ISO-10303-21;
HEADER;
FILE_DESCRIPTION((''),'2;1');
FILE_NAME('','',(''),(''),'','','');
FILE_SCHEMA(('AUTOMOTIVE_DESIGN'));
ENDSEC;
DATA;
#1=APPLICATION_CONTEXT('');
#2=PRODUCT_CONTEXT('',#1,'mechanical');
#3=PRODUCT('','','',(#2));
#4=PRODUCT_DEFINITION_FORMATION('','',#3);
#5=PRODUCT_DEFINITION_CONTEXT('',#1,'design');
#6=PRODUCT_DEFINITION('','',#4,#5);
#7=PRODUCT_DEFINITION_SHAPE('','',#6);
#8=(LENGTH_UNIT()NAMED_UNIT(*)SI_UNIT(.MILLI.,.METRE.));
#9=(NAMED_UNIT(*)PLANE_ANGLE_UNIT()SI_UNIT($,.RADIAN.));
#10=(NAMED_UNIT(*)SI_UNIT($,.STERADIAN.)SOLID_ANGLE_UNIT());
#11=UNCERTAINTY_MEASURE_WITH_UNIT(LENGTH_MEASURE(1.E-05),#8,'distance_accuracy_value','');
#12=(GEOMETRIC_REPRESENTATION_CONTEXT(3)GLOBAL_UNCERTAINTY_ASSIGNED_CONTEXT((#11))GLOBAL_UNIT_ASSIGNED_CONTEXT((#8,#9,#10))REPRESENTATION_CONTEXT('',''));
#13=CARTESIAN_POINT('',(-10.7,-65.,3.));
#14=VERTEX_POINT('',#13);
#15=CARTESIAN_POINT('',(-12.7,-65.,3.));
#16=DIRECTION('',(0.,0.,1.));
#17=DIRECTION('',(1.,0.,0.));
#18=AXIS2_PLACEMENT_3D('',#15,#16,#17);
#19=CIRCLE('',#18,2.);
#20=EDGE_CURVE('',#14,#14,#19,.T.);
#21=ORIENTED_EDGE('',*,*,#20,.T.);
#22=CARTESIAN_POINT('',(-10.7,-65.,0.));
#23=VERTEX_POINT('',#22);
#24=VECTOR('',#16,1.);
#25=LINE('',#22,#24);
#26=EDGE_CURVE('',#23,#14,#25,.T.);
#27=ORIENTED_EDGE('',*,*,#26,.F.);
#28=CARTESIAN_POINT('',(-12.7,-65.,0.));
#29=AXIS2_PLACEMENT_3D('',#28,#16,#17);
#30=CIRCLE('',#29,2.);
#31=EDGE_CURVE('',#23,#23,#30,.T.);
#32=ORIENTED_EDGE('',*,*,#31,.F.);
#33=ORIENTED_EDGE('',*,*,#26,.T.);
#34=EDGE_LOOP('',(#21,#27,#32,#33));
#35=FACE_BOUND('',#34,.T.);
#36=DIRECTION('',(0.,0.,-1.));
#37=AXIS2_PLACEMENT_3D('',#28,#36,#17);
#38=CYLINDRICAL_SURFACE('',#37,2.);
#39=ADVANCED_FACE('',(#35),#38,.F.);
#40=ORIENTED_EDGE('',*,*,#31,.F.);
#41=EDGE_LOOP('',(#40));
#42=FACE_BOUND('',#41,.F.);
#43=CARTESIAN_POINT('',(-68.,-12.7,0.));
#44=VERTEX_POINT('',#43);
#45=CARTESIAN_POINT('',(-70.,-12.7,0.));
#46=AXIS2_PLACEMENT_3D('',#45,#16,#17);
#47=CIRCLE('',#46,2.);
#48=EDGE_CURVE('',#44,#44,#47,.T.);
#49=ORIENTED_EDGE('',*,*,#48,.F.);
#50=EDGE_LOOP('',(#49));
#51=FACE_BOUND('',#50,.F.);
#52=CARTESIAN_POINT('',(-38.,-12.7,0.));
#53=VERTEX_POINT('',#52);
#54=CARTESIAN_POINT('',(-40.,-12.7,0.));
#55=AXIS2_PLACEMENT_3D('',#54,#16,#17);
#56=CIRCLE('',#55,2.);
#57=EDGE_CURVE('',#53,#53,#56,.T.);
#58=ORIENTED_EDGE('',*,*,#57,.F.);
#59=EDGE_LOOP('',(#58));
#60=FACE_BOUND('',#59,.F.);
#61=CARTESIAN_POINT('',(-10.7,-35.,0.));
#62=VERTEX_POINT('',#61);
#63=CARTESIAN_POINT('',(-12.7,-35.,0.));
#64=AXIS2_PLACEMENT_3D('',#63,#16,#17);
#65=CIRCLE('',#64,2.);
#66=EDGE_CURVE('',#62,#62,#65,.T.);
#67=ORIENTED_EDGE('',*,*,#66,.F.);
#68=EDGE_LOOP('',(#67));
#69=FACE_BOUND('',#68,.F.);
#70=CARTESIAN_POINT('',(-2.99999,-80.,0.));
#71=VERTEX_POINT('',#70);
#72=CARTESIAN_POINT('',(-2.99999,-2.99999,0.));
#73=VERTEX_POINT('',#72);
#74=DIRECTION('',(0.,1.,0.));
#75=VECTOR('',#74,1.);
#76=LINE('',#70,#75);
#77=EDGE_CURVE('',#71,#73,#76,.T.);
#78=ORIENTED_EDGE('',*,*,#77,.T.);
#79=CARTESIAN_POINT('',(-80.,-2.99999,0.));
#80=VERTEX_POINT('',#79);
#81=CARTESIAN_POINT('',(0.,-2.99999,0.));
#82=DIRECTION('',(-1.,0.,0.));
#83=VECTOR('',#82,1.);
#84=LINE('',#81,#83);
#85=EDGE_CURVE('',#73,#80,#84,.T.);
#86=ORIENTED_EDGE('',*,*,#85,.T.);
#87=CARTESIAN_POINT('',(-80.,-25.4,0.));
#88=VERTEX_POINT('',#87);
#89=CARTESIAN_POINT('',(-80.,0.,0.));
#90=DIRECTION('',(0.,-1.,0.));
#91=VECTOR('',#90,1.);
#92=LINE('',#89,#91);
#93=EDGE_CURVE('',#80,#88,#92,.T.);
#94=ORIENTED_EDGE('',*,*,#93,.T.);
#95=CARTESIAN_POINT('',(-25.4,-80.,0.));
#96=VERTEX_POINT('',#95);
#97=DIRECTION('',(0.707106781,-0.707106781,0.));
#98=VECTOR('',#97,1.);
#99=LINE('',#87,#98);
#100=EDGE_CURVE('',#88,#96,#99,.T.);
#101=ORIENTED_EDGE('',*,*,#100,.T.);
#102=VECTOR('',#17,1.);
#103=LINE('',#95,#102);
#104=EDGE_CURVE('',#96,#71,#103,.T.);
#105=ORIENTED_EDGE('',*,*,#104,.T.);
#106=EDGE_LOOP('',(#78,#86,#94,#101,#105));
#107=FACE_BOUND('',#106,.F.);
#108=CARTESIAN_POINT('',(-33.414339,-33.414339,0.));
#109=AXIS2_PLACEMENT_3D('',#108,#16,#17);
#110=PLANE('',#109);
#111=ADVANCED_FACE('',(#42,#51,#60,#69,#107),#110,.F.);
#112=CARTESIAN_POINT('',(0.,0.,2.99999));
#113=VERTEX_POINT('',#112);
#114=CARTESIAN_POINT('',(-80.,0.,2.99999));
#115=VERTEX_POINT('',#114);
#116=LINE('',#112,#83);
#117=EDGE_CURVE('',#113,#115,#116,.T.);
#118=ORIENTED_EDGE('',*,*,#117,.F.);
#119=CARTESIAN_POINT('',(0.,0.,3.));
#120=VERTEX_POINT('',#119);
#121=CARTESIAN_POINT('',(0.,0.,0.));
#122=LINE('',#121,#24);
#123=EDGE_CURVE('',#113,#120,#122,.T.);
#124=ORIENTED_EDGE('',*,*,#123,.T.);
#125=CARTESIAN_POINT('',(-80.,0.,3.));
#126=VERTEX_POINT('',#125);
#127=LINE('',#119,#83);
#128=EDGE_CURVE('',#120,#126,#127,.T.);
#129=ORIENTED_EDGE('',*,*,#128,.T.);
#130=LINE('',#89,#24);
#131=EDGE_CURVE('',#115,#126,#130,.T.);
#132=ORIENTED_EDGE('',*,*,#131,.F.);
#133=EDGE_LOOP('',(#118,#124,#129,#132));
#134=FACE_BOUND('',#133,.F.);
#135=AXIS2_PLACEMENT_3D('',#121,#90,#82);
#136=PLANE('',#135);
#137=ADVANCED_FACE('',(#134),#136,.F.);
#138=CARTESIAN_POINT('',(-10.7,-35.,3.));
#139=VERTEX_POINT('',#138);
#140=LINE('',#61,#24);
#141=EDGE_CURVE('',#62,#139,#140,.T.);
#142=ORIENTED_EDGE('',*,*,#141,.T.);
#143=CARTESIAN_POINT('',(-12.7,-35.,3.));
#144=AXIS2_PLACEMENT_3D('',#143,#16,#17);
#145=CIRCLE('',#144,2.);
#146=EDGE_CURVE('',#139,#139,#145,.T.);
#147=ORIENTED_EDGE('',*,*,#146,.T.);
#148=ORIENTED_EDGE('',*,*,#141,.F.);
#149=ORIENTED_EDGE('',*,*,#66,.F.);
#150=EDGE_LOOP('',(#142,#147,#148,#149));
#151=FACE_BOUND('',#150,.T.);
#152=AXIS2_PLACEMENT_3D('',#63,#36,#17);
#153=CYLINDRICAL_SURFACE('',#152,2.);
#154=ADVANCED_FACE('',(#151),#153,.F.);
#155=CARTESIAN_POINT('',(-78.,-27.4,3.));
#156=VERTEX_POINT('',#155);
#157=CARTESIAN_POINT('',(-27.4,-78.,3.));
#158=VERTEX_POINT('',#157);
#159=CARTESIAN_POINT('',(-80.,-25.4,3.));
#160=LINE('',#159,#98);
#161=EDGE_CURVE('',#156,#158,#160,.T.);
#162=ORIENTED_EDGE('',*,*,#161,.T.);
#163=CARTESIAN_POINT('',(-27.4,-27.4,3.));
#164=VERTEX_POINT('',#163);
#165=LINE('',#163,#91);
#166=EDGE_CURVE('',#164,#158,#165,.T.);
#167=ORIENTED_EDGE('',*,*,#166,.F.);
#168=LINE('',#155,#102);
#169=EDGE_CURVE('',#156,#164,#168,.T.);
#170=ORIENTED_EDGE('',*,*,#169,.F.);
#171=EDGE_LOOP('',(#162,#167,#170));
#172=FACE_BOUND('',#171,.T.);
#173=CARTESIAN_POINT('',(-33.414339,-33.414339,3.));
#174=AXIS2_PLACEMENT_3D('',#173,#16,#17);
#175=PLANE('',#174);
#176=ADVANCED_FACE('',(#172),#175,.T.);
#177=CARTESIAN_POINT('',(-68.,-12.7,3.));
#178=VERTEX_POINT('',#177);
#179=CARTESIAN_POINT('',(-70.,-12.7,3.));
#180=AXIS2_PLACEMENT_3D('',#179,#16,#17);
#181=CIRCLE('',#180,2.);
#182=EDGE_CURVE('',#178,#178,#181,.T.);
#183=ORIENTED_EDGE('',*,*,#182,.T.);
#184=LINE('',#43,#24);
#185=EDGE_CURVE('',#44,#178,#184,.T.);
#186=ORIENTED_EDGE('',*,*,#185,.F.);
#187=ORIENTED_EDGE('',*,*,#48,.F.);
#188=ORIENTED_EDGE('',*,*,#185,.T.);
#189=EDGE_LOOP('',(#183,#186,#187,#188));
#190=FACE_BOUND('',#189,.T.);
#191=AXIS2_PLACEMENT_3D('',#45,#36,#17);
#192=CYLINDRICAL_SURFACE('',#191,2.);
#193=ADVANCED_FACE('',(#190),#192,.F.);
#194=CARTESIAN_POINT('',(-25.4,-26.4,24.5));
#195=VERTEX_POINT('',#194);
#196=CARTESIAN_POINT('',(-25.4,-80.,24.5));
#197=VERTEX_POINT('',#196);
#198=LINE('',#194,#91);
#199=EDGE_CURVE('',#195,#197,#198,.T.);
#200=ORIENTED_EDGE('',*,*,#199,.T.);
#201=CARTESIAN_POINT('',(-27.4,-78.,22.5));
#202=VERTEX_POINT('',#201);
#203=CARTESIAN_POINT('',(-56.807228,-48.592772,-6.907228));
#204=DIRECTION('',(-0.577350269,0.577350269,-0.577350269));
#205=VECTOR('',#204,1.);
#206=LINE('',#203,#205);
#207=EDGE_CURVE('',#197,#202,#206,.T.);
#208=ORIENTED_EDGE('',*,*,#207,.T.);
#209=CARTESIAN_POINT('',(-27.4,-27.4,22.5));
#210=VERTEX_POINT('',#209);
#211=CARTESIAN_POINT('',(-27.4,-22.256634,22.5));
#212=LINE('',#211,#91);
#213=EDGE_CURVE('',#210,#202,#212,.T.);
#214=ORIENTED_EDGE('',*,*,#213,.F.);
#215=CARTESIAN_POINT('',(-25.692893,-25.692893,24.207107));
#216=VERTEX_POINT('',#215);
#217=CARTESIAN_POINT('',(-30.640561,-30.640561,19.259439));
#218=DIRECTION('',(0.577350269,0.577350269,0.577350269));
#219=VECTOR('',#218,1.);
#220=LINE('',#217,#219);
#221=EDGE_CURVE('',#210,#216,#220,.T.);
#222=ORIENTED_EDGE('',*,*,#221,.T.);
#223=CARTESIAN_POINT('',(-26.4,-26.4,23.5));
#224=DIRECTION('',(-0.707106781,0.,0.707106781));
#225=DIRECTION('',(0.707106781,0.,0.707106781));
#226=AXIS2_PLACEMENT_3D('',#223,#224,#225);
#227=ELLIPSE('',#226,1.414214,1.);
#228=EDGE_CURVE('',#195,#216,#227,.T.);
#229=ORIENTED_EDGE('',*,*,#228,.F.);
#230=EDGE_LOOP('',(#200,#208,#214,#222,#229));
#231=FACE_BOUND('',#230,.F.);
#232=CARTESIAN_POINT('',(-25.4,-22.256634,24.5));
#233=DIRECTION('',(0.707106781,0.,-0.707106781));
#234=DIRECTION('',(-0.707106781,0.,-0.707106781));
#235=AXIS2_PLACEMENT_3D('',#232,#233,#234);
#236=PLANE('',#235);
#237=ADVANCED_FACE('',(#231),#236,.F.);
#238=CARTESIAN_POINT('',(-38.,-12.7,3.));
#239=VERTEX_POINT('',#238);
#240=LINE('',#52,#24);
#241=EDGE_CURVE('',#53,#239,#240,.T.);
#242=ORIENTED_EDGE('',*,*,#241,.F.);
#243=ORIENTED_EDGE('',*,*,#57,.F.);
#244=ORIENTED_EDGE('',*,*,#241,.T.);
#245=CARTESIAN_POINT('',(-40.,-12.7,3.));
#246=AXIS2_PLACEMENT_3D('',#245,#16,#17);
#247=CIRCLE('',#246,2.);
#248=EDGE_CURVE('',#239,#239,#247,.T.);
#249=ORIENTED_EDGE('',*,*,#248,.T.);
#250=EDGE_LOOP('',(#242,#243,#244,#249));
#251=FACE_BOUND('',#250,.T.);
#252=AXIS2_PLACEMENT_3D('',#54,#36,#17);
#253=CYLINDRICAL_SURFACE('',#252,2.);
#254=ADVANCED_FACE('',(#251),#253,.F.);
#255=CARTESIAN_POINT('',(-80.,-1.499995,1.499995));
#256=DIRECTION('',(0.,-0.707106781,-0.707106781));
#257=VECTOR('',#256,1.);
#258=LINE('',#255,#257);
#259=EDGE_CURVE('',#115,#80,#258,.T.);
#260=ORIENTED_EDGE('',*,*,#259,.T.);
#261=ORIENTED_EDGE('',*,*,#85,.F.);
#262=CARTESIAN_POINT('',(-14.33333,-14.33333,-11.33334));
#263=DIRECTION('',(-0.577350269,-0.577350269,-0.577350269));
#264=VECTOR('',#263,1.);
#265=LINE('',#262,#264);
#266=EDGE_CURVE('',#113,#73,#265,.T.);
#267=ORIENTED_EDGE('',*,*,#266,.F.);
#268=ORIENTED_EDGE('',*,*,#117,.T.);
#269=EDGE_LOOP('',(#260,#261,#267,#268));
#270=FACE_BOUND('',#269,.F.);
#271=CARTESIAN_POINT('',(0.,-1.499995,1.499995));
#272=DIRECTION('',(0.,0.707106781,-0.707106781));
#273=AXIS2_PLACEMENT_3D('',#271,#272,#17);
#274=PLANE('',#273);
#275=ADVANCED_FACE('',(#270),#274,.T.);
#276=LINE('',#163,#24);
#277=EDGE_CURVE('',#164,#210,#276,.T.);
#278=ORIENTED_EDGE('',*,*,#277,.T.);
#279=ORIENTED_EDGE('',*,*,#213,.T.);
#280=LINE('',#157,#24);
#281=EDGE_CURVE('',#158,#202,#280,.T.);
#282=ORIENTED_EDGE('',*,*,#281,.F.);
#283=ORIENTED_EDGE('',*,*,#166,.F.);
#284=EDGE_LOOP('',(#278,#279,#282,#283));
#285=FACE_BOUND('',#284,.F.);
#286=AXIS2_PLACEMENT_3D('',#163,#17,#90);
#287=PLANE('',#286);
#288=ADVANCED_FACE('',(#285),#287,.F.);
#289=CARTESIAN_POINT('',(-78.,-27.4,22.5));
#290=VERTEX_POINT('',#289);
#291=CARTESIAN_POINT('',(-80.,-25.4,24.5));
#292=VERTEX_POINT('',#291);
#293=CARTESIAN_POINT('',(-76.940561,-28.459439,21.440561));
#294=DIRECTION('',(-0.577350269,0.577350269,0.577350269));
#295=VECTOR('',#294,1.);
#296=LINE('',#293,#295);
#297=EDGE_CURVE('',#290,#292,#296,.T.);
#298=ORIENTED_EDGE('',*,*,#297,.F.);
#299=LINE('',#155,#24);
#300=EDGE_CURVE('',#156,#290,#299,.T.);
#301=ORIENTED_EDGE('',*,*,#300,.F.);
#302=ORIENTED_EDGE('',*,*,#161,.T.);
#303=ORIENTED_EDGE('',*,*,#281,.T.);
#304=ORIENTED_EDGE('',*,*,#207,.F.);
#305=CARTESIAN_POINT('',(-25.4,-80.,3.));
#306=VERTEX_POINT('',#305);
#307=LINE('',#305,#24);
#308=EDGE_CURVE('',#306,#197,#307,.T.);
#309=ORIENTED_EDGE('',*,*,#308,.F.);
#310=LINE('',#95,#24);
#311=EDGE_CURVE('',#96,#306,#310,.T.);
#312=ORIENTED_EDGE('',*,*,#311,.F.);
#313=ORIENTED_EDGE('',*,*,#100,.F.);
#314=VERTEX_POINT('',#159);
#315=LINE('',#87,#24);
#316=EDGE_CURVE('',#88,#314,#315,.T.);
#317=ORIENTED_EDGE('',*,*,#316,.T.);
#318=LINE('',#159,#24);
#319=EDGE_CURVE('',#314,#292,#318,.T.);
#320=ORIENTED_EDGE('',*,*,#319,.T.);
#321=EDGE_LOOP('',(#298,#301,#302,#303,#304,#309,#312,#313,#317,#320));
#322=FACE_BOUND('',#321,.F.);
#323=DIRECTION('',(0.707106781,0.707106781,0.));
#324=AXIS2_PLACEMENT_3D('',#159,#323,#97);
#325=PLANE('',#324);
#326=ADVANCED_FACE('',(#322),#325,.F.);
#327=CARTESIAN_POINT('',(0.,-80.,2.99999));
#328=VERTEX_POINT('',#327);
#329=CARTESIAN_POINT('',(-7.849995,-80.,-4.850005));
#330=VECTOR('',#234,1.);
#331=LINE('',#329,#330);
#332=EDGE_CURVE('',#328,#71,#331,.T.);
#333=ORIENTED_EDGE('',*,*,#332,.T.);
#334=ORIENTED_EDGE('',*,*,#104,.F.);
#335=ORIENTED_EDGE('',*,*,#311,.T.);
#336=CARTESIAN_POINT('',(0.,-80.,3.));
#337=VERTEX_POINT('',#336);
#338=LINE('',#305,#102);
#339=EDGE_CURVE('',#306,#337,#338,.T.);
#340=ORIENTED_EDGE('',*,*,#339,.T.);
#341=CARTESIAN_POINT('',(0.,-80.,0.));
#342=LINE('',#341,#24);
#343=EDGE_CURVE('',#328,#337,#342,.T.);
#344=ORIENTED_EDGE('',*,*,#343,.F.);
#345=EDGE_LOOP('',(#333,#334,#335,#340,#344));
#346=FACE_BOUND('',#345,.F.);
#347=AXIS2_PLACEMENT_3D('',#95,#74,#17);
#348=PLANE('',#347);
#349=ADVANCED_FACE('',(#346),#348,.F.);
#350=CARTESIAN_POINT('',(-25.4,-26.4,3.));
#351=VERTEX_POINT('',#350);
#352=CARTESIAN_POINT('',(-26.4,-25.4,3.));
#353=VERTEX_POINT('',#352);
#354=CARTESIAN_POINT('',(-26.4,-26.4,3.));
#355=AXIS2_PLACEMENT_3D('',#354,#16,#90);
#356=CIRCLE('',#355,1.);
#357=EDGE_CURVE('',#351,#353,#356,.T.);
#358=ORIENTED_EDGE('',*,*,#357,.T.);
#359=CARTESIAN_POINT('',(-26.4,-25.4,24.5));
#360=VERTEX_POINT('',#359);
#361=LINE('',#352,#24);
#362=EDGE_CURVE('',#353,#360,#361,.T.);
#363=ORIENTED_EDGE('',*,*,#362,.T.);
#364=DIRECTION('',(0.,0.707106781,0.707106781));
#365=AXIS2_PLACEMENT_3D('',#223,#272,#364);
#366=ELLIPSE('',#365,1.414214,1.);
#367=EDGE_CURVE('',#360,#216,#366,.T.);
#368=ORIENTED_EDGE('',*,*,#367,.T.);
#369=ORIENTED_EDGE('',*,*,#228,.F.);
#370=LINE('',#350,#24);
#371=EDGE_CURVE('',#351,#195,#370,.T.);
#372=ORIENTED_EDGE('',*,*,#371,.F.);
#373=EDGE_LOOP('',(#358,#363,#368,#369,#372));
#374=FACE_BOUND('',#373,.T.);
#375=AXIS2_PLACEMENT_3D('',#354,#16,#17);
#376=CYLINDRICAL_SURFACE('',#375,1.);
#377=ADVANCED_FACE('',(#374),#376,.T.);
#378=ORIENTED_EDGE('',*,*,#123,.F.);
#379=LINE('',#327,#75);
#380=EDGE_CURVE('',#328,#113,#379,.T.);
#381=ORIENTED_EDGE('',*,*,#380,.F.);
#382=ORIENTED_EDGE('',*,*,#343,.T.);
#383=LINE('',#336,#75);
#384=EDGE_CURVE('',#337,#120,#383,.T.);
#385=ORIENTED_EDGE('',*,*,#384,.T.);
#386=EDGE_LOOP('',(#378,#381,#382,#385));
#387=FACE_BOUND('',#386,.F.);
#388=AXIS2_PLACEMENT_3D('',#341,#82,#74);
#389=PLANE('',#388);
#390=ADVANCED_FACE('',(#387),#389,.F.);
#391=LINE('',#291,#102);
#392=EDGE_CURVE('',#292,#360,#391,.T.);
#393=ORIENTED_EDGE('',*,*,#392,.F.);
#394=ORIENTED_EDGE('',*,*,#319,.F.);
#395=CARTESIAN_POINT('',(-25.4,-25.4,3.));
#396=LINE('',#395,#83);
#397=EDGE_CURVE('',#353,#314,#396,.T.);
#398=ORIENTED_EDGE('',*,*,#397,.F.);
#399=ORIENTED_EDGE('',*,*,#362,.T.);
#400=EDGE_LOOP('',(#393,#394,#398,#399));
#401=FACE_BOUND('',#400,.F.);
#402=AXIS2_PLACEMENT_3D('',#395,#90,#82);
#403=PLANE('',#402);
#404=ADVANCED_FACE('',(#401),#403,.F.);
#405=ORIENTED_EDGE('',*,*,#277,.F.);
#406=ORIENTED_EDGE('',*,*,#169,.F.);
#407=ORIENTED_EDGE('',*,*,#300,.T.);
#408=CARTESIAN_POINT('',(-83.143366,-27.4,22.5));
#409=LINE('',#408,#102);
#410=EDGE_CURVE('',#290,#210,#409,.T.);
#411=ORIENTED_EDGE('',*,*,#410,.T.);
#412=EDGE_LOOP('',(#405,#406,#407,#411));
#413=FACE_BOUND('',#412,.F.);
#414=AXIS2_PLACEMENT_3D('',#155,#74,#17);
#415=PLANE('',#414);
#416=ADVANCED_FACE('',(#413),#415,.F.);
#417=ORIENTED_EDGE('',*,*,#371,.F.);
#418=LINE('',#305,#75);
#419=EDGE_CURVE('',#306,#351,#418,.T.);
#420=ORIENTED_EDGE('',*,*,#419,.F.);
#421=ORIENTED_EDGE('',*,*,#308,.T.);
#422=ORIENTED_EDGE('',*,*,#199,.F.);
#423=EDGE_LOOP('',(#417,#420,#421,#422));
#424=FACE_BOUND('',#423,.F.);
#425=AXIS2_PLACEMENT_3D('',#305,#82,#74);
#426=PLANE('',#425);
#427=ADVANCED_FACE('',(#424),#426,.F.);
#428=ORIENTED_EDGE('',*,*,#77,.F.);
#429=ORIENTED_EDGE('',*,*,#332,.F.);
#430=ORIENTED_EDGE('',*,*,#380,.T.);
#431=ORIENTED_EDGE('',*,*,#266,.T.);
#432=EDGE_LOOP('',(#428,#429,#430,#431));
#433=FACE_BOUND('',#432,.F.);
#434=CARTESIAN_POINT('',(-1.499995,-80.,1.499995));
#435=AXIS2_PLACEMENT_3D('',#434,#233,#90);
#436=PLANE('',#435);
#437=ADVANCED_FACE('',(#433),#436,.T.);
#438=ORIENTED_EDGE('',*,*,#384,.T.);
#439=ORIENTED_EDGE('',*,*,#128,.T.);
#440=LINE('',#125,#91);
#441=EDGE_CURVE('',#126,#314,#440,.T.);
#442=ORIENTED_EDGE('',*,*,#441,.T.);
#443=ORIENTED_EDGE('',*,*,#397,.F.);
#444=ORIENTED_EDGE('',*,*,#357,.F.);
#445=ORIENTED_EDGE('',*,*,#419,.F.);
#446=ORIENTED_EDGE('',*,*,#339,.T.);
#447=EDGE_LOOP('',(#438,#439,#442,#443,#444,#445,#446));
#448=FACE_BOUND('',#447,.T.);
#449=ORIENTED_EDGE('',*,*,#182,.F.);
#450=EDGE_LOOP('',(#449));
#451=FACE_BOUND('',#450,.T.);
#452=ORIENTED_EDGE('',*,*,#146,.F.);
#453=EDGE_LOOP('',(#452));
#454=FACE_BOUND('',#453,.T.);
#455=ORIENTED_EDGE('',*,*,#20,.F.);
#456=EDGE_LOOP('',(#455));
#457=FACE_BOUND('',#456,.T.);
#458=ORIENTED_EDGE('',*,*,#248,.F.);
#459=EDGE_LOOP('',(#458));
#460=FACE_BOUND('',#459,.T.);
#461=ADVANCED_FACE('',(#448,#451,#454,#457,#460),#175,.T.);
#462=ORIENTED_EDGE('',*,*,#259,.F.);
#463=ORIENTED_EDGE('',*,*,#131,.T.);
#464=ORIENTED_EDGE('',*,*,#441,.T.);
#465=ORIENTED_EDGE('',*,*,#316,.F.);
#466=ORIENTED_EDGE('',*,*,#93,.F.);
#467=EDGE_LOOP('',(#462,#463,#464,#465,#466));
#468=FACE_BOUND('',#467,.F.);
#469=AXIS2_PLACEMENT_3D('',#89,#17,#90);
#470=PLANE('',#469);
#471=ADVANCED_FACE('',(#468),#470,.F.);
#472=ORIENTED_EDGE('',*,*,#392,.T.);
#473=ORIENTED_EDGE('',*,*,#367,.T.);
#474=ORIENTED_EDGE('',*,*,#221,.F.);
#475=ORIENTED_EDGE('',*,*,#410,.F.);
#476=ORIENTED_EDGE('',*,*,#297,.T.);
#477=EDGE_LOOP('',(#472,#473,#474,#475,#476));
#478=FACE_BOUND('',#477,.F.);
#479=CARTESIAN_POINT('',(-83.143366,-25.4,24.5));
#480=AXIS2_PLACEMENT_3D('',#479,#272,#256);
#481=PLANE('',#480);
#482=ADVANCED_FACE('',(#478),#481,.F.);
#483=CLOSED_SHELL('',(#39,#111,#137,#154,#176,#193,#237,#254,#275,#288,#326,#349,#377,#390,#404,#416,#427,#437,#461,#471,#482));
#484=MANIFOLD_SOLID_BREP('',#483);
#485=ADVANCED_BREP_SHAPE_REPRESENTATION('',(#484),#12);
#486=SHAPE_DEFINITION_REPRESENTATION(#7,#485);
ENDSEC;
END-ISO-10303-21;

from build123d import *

# Parameters (mm, degrees)
F0_R        = 2
F1_DEPTH    = 3
F3_DEPTH    = 21.5
F4_SIZE     = 2.99999
F5_R        = 1
F6_T4_DEPTH = 60.8867319519
F6_T9_DEPTH = 60.8867319519


# Not quite as in the source:
# - a fillet or chamfer that OpenCascade refuses, or shapes differently, is made with other operations: its cross-section is extruded or revolved along the edge and cut away or added
# - a fillet or chamfer is up to 0.001 mm smaller than in the source, because OpenCascade refuses the exact size


with BuildPart() as f1:
    # F0 (on Top) → F1 (new body)
    with BuildSketch(Plane.XY):
        Polygon((0, -80), (0, 0), (-80, 0), (-80, -25.4), (-25.4, -80), align=None)
        with Locations((-12.7, -65)):
            Circle(F0_R, mode=Mode.SUBTRACT)
        with Locations((-70, -12.7)):
            Circle(F0_R, mode=Mode.SUBTRACT)
        with Locations((-12.7, -35)):
            Circle(F0_R, mode=Mode.SUBTRACT)
        with Locations((-40, -12.7)):
            Circle(F0_R, mode=Mode.SUBTRACT)
    extrude(amount=F1_DEPTH)

    # F2 (on face) → F3 (join)
    with BuildSketch(Plane.XY.offset(3)):
        Polygon((-25.4, -25.4), (-80, -25.4), (-78, -27.4), (-27.4, -27.4), (-27.4, -78), (-25.4, -80), align=None)
    extrude(amount=F3_DEPTH)

    # F4 (size 3 in the source; OpenCascade refuses exactly that, so slightly less here)
    f4_edges = [f1.edges().sort_by_distance(p)[0] for p in [
        (-40, 0, 0),
        (0, -40, 0),
    ]]
    chamfer(f4_edges, length=F4_SIZE)

    # F5
    f5_edges = [f1.edges().sort_by_distance(p)[0] for p in [
        (-25.4, -25.4, 13.75),
    ]]
    fillet(f5_edges, radius=F5_R)

    # F6: chamfer of 2 on 2 edges, made by hand


with BuildPart() as f6_tool2:
    # F6_s3 → F6_t4 (new body)
    with BuildSketch(Plane.YZ.offset(-83.1433659759)):
        Polygon((-25.4, 24.5), (-27.4, 22.5), (-27.4, 24.5), align=None)
    extrude(amount=F6_T4_DEPTH)

    split(bisect_by=Plane(origin=(-24.95, 0, 24.95), x_dir=(0, 1, 0), z_dir=(-0.7071067812, 0, 0.7071067812)), keep=Keep.TOP)


with BuildPart() as f1_1:
    add(f1.part)

    # F6_t1: cut F6_tool2
    add(f6_tool2.part, mode=Mode.SUBTRACT)


with BuildPart() as f6_tool7:
    # F6_s8 → F6_t9 (new body)
    with BuildSketch(Plane.XZ.offset(22.2566340241)):
        Polygon((-25.4, 24.5), (-27.4, 22.5), (-27.4, 24.5), align=None)
    extrude(amount=F6_T9_DEPTH)

    split(bisect_by=Plane(origin=(0, -24.95, 24.95), x_dir=(1, 0, 0), z_dir=(0, -0.7071067812, 0.7071067812)), keep=Keep.TOP)


with BuildPart() as f1_2:
    add(f1_1.part)

    # F6_t6: cut F6_tool7
    add(f6_tool7.part, mode=Mode.SUBTRACT)


solid = f1_2.part
